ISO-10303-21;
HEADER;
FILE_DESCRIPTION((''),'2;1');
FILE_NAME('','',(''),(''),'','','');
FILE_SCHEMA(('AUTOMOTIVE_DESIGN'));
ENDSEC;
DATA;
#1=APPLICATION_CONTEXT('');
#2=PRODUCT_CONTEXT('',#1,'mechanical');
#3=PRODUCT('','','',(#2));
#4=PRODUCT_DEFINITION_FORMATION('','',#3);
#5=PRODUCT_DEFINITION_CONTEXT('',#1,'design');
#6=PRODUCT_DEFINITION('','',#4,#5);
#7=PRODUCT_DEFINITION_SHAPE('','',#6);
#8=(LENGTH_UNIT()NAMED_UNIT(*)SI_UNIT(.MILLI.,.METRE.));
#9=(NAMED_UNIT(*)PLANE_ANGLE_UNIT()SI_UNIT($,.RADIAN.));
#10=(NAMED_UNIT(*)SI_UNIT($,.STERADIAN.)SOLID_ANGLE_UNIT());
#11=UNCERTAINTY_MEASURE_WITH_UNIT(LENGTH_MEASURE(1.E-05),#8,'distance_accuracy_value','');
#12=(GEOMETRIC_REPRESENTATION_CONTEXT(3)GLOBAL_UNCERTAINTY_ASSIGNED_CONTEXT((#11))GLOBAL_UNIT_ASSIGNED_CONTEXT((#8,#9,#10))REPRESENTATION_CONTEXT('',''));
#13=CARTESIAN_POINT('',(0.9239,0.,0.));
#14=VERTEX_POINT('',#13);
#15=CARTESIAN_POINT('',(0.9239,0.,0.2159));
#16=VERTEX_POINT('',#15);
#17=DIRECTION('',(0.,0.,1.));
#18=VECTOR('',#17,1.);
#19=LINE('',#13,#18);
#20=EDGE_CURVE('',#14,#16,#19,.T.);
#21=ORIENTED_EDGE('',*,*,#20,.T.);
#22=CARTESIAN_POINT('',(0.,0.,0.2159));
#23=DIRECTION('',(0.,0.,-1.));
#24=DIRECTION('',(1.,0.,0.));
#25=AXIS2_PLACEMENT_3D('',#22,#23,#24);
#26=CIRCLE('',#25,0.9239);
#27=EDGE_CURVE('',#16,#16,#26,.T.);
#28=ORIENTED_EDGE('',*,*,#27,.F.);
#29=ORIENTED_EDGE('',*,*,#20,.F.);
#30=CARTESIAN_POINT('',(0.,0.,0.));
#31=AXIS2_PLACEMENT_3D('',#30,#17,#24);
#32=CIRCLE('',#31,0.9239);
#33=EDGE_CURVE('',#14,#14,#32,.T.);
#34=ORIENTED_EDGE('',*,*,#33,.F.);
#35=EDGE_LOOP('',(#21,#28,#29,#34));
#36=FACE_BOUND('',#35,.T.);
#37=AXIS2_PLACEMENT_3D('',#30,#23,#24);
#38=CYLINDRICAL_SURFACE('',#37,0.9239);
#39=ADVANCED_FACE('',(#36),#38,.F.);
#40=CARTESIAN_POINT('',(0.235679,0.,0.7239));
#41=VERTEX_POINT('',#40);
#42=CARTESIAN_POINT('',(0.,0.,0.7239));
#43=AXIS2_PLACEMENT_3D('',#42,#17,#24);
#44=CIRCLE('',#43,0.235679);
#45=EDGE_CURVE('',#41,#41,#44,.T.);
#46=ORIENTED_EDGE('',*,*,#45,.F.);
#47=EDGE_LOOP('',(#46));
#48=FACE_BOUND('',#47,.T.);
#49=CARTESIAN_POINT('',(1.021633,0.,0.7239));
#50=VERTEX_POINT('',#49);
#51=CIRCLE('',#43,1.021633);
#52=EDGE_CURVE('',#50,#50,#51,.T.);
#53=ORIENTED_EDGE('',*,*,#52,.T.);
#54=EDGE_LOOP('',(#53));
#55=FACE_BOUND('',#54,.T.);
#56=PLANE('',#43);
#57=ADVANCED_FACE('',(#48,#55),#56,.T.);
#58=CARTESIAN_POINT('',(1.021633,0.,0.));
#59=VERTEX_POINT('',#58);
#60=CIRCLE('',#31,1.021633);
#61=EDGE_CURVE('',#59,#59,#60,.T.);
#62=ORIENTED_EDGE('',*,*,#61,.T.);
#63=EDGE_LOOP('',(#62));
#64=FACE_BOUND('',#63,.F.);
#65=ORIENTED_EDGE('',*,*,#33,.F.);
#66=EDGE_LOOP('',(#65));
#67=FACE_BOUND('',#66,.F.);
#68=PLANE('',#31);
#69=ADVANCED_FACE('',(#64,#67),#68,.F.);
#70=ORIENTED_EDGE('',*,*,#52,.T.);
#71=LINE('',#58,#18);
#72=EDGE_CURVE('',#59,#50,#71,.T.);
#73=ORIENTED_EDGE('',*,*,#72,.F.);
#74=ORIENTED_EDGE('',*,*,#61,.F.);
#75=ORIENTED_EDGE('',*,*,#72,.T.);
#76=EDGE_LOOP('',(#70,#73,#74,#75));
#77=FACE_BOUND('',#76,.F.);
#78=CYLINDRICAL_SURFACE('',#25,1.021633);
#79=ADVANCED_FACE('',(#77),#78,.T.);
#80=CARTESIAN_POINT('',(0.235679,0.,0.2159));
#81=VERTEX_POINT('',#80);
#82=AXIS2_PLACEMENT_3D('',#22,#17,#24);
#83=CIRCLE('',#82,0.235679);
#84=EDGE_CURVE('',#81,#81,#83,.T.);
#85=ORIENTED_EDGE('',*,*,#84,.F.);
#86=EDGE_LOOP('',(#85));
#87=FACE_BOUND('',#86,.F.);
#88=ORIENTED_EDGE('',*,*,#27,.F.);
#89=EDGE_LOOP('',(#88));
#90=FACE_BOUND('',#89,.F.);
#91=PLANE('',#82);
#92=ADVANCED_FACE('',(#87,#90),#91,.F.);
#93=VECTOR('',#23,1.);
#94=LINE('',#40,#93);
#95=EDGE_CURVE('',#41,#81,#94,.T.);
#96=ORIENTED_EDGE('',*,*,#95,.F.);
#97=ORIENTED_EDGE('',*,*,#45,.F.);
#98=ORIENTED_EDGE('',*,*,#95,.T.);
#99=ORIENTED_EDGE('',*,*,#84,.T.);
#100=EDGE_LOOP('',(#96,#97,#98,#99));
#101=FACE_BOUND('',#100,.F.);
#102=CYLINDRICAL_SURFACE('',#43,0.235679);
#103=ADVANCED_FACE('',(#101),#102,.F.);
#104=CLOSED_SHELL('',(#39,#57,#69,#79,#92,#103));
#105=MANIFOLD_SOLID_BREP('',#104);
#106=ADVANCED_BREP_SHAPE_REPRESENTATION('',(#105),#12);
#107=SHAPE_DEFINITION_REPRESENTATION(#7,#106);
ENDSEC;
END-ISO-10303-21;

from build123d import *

# Parameters (mm, degrees)
F0_R      = 1.0216326818
F1_DEPTH  = 0.2159
F2_R      = 0.9238996
F1_FACE_R = 1.0216326818
F3_DEPTH  = 0.424434
F4_R      = 1.0216326818
F4_R_2    = 0.9238996
F5_DEPTH  = 0.508
F6_R      = 0.2356788085
F7_DEPTH  = 25.4


with BuildPart() as f1:
    # F0 (on Top) → F1 (new body)
    with BuildSketch(Plane.XY):
        Circle(F0_R)
    extrude(amount=F1_DEPTH)

    # F2 (on Top) + F1_face (on face) → F3 (cut)
    with BuildSketch(Plane.XY):
        Circle(F2_R)
    with BuildSketch(Plane.XY.offset(0.2159)):
        Circle(F1_FACE_R)
    extrude(amount=F3_DEPTH, mode=Mode.SUBTRACT)

    # F4 (on face) → F5 (join)
    with BuildSketch(Plane.XY.offset(0.2159)):
        Circle(F4_R)
        Circle(F4_R_2, mode=Mode.SUBTRACT)
        Circle(F4_R_2)
    extrude(amount=F5_DEPTH)

    # F6 (on face) → F7 (cut)
    with BuildSketch(Plane.XY.offset(0.7239)):
        Circle(F6_R)
    extrude(amount=-F7_DEPTH, mode=Mode.SUBTRACT)


solid = f1.part
